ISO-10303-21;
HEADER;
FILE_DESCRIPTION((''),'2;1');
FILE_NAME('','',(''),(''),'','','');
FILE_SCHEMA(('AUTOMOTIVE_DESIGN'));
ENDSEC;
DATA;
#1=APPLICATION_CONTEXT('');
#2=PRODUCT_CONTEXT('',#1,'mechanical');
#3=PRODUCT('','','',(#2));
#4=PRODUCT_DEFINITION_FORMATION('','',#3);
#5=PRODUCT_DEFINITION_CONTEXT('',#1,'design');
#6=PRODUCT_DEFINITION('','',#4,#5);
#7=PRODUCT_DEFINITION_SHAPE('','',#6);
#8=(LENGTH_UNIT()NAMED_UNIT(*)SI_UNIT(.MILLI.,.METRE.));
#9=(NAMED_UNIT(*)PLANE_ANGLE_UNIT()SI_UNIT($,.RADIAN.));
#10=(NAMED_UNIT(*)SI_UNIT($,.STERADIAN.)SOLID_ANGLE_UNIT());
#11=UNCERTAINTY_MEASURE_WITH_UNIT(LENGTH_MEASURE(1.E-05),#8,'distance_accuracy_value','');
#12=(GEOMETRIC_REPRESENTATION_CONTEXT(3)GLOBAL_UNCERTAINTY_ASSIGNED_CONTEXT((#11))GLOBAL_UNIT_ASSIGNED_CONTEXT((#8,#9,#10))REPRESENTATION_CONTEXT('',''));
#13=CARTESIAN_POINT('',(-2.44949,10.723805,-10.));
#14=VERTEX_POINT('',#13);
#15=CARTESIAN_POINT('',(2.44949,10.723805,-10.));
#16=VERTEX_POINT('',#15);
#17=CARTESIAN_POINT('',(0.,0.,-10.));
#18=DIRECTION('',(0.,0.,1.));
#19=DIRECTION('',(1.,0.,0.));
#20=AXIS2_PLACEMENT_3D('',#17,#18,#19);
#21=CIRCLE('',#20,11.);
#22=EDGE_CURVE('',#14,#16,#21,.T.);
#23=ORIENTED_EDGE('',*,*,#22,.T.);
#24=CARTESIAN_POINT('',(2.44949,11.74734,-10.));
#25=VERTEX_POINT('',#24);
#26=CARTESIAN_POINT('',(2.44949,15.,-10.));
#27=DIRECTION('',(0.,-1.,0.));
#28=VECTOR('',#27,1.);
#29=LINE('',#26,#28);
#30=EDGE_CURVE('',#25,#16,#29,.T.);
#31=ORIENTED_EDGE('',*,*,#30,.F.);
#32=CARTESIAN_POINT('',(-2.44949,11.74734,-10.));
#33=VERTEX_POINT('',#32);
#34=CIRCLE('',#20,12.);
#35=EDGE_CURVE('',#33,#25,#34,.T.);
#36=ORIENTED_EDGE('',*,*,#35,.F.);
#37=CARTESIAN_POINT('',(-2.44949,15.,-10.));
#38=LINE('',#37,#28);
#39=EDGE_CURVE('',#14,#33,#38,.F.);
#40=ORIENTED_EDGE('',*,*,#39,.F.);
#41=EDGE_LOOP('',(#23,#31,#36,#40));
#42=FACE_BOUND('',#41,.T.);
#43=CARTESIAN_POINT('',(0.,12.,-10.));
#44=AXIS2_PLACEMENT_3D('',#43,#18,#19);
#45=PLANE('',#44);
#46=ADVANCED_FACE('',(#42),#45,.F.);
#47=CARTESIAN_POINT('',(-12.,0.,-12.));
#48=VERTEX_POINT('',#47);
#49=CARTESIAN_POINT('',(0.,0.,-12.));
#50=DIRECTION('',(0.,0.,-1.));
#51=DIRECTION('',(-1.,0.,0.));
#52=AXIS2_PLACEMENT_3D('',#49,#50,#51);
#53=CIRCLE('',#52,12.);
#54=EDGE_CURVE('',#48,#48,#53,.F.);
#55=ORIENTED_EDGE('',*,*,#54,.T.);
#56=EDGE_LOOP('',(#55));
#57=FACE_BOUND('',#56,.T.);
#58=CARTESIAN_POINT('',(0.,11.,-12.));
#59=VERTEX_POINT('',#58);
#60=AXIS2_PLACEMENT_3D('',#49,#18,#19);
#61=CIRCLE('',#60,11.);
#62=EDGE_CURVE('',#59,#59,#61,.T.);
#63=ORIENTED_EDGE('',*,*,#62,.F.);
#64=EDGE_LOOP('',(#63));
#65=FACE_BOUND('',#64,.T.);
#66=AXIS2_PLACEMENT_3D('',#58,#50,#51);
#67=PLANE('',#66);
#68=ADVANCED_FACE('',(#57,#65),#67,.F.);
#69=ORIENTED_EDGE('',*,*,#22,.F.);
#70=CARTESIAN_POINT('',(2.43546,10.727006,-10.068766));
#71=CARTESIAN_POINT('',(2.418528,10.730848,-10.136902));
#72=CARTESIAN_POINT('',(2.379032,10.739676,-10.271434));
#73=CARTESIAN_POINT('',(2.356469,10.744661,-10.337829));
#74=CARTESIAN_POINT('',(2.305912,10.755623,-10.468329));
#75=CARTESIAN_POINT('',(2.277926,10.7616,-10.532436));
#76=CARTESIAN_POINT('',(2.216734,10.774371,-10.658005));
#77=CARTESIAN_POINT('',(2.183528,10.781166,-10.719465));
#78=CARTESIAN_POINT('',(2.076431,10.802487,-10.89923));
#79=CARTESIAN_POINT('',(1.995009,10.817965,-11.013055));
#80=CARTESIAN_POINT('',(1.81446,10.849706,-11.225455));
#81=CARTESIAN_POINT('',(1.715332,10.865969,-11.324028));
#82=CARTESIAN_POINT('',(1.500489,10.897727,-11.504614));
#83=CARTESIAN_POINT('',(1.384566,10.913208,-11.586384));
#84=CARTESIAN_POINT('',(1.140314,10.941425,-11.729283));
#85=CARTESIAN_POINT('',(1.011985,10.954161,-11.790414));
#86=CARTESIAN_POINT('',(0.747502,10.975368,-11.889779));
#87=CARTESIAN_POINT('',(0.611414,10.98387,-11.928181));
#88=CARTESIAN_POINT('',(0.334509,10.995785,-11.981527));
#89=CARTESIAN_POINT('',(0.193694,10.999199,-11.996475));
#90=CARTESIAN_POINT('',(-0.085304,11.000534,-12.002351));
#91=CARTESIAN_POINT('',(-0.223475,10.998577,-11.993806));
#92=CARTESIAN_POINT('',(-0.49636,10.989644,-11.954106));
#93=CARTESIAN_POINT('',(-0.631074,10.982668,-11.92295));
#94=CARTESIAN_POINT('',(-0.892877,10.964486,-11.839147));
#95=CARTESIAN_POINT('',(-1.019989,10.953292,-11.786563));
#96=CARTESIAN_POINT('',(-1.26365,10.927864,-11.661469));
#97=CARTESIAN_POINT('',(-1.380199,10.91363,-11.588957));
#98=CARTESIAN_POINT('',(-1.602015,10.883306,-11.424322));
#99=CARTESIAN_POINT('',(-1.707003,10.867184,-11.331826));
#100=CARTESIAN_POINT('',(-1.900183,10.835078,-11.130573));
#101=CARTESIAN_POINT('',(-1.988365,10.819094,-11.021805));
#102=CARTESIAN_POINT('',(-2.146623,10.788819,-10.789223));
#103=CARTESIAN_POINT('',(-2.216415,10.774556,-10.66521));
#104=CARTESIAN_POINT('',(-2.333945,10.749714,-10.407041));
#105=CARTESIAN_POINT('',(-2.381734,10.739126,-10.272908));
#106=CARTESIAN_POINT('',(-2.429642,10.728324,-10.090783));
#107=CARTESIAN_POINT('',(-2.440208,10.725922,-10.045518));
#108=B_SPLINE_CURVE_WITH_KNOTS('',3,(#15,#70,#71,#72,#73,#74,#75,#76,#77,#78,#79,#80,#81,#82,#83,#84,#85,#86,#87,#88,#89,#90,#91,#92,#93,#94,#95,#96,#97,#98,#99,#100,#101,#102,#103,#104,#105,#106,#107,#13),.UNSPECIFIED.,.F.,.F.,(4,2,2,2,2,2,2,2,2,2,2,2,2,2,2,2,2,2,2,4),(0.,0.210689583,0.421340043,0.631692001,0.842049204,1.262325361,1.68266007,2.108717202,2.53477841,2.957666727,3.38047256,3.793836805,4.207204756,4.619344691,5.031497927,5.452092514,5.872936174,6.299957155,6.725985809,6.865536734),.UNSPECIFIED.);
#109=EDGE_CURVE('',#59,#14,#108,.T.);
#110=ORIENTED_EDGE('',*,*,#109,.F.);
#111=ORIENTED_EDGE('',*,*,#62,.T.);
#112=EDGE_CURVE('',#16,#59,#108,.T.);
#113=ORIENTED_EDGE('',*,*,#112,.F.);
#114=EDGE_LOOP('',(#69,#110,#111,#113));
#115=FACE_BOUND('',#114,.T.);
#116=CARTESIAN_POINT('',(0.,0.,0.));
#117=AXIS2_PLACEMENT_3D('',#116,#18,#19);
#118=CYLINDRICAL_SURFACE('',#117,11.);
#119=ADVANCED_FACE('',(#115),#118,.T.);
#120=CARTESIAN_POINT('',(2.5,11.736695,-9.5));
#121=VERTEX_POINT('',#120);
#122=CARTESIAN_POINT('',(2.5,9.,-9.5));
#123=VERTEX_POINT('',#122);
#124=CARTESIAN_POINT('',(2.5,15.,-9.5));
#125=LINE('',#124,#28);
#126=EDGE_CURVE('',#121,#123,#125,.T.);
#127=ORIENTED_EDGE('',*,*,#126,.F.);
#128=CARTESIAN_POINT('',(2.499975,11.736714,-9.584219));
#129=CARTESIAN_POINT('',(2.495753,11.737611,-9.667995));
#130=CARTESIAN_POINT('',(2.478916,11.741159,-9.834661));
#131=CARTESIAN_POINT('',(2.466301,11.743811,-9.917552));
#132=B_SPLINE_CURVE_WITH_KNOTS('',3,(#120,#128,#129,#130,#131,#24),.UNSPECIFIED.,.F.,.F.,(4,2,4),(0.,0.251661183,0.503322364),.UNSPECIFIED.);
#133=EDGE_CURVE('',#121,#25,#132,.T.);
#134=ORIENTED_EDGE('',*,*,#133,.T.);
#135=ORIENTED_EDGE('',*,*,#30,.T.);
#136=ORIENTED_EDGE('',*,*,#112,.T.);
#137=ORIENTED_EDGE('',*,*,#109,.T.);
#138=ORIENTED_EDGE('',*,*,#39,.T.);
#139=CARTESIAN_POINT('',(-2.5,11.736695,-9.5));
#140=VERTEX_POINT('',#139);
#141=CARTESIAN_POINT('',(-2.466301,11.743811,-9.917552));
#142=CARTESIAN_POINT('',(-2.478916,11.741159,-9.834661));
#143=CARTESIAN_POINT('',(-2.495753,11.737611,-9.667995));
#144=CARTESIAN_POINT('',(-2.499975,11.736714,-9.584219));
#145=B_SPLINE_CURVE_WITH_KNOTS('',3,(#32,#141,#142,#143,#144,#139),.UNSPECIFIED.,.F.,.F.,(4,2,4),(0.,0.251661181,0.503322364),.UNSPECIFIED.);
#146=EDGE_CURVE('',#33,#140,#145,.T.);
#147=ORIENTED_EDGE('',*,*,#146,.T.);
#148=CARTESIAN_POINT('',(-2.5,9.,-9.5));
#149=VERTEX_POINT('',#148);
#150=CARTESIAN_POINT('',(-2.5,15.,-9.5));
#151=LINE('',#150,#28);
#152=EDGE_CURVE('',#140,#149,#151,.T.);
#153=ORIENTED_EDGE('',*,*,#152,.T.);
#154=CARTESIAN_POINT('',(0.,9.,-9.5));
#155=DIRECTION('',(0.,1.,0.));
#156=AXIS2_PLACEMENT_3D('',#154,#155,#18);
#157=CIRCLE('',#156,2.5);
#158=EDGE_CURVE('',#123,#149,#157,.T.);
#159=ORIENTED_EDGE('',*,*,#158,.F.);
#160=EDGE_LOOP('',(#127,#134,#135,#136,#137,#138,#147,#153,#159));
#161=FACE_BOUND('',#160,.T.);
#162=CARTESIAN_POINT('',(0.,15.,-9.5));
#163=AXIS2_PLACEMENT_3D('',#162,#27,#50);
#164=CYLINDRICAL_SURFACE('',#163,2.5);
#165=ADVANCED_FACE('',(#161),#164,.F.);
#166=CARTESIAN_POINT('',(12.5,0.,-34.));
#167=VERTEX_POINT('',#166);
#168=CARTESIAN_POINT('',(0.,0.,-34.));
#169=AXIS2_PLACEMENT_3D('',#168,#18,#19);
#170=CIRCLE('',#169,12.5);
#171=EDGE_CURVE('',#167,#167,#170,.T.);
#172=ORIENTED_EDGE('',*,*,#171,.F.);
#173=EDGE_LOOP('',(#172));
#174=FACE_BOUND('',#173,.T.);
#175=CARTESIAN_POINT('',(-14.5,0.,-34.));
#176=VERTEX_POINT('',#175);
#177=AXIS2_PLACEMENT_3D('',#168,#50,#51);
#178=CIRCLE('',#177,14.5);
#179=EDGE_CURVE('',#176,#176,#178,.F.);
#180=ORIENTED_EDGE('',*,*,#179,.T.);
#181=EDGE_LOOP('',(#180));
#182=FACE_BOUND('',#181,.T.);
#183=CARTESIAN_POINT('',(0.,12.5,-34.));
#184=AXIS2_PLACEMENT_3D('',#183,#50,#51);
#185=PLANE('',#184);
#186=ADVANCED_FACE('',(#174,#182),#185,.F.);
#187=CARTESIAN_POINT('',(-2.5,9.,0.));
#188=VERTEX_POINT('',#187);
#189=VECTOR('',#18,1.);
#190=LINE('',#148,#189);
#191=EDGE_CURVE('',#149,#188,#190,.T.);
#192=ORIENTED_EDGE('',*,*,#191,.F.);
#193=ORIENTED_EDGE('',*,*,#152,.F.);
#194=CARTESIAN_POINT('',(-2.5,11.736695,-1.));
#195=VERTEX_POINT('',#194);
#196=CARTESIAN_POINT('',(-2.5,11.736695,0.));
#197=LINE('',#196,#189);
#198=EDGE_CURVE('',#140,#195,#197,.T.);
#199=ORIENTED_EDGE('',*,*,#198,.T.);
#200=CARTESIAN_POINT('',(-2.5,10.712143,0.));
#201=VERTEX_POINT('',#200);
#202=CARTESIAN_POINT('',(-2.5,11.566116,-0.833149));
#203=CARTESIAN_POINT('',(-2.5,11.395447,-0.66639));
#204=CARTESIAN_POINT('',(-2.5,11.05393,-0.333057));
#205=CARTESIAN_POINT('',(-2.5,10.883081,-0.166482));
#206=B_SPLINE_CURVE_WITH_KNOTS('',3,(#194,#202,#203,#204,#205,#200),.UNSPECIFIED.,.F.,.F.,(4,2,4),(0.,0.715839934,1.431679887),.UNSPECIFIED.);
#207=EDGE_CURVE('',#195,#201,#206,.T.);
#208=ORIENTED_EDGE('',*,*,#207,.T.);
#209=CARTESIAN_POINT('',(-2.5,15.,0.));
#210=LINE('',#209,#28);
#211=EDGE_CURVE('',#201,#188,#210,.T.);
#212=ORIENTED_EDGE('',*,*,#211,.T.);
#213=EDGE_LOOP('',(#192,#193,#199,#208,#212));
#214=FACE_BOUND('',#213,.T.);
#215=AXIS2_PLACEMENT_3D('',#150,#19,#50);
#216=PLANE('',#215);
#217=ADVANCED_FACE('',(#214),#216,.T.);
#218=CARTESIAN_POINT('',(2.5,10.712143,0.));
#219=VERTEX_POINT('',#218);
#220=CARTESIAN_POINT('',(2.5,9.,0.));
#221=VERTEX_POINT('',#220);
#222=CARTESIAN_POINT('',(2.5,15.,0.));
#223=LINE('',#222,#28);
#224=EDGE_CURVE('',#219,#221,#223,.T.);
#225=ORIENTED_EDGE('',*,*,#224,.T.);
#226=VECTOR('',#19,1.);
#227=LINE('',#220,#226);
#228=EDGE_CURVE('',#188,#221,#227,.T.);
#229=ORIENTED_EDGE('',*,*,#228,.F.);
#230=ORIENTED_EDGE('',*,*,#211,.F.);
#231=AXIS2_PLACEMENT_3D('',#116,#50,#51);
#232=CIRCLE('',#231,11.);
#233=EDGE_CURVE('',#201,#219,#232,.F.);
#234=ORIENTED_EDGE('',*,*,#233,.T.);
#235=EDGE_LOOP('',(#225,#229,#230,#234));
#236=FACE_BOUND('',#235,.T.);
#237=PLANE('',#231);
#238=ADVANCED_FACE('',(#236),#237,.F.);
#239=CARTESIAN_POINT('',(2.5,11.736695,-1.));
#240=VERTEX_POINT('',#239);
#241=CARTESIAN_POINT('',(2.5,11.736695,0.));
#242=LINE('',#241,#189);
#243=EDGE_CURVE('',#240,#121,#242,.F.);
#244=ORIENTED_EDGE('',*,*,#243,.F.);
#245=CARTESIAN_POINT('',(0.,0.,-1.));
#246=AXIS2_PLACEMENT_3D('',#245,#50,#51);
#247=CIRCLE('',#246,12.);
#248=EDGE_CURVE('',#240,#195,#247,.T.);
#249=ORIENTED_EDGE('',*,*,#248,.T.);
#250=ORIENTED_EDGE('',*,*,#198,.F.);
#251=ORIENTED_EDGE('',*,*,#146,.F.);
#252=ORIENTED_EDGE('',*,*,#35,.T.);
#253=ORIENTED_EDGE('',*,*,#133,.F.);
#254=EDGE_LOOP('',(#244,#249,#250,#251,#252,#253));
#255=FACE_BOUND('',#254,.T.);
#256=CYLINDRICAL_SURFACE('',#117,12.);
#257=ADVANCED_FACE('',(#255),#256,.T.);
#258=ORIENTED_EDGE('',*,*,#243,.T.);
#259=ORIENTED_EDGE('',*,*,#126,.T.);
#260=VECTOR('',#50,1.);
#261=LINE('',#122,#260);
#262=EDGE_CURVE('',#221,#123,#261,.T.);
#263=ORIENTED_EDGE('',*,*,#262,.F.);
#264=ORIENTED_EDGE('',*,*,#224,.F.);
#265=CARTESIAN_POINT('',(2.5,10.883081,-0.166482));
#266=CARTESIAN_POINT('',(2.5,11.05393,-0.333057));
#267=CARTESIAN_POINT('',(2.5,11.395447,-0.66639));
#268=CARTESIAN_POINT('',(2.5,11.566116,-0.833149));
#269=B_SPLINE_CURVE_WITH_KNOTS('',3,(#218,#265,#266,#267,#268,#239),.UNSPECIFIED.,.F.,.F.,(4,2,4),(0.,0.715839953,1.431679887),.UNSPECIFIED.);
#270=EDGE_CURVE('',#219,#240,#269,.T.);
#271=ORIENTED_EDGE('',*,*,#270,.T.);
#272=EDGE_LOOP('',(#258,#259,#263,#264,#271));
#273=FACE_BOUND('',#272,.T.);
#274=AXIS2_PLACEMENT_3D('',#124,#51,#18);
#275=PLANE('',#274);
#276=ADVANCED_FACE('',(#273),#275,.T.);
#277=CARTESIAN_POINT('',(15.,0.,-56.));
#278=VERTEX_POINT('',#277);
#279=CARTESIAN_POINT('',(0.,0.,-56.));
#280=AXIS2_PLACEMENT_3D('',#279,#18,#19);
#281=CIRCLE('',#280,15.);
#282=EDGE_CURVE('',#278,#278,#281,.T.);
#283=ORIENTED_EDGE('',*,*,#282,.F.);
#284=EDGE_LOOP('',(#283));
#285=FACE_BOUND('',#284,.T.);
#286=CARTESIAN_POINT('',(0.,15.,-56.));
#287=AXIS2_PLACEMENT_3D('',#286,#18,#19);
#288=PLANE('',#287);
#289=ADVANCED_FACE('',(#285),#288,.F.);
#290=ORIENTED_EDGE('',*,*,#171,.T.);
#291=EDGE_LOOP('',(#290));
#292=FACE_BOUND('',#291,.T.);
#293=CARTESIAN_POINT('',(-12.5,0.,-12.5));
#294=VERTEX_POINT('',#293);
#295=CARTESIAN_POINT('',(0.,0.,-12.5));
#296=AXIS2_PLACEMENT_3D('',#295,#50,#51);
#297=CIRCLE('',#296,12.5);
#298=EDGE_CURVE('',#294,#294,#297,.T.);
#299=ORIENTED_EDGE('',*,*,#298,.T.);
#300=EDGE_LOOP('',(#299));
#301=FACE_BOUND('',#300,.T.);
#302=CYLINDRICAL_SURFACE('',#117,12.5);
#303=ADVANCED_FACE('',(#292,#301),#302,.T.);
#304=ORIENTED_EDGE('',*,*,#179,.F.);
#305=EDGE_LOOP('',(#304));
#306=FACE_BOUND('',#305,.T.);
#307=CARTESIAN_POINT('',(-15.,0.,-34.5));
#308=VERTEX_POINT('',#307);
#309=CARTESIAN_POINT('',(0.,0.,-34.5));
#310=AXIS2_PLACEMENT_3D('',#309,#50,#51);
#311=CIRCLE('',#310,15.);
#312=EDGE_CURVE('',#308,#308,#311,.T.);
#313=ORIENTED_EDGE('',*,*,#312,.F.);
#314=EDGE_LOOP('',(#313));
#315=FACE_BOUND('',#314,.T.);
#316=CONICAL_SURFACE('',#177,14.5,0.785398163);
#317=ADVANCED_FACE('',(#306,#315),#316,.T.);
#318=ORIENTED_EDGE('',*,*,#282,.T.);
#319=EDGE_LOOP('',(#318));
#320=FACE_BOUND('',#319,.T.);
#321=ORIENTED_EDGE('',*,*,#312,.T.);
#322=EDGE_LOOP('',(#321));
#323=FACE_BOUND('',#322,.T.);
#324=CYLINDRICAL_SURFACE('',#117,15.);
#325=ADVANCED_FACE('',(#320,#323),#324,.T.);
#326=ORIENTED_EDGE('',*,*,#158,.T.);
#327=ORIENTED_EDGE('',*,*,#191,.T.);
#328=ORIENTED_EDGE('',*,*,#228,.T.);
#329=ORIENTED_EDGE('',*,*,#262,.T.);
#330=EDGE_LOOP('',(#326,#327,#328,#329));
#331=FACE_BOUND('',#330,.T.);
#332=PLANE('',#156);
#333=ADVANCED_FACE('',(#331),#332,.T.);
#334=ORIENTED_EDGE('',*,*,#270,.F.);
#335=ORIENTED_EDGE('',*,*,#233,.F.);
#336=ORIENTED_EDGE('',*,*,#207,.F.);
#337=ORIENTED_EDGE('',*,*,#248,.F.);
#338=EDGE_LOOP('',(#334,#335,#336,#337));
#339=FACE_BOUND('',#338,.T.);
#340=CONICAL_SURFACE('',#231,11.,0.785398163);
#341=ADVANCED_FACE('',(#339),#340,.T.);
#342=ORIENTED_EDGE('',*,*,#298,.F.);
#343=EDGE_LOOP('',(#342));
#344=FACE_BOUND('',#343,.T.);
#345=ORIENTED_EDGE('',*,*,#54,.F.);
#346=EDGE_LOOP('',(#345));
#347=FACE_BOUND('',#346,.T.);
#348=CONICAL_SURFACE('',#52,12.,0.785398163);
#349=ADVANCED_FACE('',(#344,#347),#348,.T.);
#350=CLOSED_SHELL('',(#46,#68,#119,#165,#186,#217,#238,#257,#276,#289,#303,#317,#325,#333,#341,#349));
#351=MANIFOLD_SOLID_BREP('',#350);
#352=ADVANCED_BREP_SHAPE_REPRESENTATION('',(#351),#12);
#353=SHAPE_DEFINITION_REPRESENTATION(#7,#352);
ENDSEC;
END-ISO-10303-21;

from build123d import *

# Parameters (mm, degrees)
CUT_EXTRUDE_1_DEPTH = 63.745517768
CHAMFER_1_SIZE      = 1
CHAMFER_2_SIZE      = 0.5


with BuildPart() as part:
    # 草图1 → 旋转1 (revolve)
    with BuildSketch(Plane(origin=(0, 0, 0), x_dir=(0, 0, -1), z_dir=(1, 0, 0)), mode=Mode.PRIVATE) as revolve_1_sk:
        Polygon((0, 0), (0, 12), (10, 12), (10, 11), (12, 11), (12, 12.5), (34, 12.5), (34, 15), (56, 15), (56, 0), align=None)
    revolve(revolve_1_sk.sketch.rotate(Axis((0, 0, 0), (0, 0, -1)), 90), axis=Axis((0, 0, 0), (0, 0, -1)))

    # 草图2 → 切除-拉伸1 (cut, through all)
    with BuildSketch(Plane(origin=(0, 9, 0), x_dir=(1, 0, 0), z_dir=(0, 1, 0))):
        with BuildLine():
            Line((-2.5, 9.5), (-2.5, 0))
            Line((-2.5, 0), (2.5, 0))
            Line((2.5, 0), (2.5, 9.5))
            ThreePointArc((2.5, 9.5), (0, 12), (-2.5, 9.5))
        make_face()
    extrude(amount=CUT_EXTRUDE_1_DEPTH, mode=Mode.SUBTRACT)

    # 倒角1
    chamfer_1_edges = [part.edges().sort_by_distance(p)[0] for p in [
        (0, -12, 0),
    ]]
    chamfer(chamfer_1_edges, length=CHAMFER_1_SIZE)

    # 倒角2
    # the kernel refuses this chamfer: 0.5 mm, written as the material it takes off along each edge
    with BuildSketch(Plane(origin=(0, 0, -34), x_dir=(1, 0, 0), z_dir=(0, 1, 0))) as chamfer_2_piece_1:
        Polygon((15 - CHAMFER_2_SIZE, 0), (15, CHAMFER_2_SIZE), (15, 0), align=None)
    revolve(axis=Axis((0, 0, -34), (0, 0, -1)), mode=Mode.SUBTRACT)
    with BuildSketch(Plane(origin=(0, 0, -12), x_dir=(0, 1, 0), z_dir=(-1, 0, 0))) as chamfer_2_piece_2:
        Polygon((12.5 - CHAMFER_2_SIZE, 0), (12.5, CHAMFER_2_SIZE), (12.5, 0), align=None)
    revolve(axis=Axis((0, 0, -12), (0, 0, -1)), revolution_arc=90, mode=Mode.SUBTRACT)
    with BuildSketch(Plane(origin=(0, 0, -12), x_dir=(1, 0, 0), z_dir=(0, 1, 0))) as chamfer_2_piece_3:
        Polygon((12.5 - CHAMFER_2_SIZE, 0), (12.5, CHAMFER_2_SIZE), (12.5, 0), align=None)
    revolve(axis=Axis((0, 0, -12), (0, 0, -1)), revolution_arc=270, mode=Mode.SUBTRACT)


solid = part.part
